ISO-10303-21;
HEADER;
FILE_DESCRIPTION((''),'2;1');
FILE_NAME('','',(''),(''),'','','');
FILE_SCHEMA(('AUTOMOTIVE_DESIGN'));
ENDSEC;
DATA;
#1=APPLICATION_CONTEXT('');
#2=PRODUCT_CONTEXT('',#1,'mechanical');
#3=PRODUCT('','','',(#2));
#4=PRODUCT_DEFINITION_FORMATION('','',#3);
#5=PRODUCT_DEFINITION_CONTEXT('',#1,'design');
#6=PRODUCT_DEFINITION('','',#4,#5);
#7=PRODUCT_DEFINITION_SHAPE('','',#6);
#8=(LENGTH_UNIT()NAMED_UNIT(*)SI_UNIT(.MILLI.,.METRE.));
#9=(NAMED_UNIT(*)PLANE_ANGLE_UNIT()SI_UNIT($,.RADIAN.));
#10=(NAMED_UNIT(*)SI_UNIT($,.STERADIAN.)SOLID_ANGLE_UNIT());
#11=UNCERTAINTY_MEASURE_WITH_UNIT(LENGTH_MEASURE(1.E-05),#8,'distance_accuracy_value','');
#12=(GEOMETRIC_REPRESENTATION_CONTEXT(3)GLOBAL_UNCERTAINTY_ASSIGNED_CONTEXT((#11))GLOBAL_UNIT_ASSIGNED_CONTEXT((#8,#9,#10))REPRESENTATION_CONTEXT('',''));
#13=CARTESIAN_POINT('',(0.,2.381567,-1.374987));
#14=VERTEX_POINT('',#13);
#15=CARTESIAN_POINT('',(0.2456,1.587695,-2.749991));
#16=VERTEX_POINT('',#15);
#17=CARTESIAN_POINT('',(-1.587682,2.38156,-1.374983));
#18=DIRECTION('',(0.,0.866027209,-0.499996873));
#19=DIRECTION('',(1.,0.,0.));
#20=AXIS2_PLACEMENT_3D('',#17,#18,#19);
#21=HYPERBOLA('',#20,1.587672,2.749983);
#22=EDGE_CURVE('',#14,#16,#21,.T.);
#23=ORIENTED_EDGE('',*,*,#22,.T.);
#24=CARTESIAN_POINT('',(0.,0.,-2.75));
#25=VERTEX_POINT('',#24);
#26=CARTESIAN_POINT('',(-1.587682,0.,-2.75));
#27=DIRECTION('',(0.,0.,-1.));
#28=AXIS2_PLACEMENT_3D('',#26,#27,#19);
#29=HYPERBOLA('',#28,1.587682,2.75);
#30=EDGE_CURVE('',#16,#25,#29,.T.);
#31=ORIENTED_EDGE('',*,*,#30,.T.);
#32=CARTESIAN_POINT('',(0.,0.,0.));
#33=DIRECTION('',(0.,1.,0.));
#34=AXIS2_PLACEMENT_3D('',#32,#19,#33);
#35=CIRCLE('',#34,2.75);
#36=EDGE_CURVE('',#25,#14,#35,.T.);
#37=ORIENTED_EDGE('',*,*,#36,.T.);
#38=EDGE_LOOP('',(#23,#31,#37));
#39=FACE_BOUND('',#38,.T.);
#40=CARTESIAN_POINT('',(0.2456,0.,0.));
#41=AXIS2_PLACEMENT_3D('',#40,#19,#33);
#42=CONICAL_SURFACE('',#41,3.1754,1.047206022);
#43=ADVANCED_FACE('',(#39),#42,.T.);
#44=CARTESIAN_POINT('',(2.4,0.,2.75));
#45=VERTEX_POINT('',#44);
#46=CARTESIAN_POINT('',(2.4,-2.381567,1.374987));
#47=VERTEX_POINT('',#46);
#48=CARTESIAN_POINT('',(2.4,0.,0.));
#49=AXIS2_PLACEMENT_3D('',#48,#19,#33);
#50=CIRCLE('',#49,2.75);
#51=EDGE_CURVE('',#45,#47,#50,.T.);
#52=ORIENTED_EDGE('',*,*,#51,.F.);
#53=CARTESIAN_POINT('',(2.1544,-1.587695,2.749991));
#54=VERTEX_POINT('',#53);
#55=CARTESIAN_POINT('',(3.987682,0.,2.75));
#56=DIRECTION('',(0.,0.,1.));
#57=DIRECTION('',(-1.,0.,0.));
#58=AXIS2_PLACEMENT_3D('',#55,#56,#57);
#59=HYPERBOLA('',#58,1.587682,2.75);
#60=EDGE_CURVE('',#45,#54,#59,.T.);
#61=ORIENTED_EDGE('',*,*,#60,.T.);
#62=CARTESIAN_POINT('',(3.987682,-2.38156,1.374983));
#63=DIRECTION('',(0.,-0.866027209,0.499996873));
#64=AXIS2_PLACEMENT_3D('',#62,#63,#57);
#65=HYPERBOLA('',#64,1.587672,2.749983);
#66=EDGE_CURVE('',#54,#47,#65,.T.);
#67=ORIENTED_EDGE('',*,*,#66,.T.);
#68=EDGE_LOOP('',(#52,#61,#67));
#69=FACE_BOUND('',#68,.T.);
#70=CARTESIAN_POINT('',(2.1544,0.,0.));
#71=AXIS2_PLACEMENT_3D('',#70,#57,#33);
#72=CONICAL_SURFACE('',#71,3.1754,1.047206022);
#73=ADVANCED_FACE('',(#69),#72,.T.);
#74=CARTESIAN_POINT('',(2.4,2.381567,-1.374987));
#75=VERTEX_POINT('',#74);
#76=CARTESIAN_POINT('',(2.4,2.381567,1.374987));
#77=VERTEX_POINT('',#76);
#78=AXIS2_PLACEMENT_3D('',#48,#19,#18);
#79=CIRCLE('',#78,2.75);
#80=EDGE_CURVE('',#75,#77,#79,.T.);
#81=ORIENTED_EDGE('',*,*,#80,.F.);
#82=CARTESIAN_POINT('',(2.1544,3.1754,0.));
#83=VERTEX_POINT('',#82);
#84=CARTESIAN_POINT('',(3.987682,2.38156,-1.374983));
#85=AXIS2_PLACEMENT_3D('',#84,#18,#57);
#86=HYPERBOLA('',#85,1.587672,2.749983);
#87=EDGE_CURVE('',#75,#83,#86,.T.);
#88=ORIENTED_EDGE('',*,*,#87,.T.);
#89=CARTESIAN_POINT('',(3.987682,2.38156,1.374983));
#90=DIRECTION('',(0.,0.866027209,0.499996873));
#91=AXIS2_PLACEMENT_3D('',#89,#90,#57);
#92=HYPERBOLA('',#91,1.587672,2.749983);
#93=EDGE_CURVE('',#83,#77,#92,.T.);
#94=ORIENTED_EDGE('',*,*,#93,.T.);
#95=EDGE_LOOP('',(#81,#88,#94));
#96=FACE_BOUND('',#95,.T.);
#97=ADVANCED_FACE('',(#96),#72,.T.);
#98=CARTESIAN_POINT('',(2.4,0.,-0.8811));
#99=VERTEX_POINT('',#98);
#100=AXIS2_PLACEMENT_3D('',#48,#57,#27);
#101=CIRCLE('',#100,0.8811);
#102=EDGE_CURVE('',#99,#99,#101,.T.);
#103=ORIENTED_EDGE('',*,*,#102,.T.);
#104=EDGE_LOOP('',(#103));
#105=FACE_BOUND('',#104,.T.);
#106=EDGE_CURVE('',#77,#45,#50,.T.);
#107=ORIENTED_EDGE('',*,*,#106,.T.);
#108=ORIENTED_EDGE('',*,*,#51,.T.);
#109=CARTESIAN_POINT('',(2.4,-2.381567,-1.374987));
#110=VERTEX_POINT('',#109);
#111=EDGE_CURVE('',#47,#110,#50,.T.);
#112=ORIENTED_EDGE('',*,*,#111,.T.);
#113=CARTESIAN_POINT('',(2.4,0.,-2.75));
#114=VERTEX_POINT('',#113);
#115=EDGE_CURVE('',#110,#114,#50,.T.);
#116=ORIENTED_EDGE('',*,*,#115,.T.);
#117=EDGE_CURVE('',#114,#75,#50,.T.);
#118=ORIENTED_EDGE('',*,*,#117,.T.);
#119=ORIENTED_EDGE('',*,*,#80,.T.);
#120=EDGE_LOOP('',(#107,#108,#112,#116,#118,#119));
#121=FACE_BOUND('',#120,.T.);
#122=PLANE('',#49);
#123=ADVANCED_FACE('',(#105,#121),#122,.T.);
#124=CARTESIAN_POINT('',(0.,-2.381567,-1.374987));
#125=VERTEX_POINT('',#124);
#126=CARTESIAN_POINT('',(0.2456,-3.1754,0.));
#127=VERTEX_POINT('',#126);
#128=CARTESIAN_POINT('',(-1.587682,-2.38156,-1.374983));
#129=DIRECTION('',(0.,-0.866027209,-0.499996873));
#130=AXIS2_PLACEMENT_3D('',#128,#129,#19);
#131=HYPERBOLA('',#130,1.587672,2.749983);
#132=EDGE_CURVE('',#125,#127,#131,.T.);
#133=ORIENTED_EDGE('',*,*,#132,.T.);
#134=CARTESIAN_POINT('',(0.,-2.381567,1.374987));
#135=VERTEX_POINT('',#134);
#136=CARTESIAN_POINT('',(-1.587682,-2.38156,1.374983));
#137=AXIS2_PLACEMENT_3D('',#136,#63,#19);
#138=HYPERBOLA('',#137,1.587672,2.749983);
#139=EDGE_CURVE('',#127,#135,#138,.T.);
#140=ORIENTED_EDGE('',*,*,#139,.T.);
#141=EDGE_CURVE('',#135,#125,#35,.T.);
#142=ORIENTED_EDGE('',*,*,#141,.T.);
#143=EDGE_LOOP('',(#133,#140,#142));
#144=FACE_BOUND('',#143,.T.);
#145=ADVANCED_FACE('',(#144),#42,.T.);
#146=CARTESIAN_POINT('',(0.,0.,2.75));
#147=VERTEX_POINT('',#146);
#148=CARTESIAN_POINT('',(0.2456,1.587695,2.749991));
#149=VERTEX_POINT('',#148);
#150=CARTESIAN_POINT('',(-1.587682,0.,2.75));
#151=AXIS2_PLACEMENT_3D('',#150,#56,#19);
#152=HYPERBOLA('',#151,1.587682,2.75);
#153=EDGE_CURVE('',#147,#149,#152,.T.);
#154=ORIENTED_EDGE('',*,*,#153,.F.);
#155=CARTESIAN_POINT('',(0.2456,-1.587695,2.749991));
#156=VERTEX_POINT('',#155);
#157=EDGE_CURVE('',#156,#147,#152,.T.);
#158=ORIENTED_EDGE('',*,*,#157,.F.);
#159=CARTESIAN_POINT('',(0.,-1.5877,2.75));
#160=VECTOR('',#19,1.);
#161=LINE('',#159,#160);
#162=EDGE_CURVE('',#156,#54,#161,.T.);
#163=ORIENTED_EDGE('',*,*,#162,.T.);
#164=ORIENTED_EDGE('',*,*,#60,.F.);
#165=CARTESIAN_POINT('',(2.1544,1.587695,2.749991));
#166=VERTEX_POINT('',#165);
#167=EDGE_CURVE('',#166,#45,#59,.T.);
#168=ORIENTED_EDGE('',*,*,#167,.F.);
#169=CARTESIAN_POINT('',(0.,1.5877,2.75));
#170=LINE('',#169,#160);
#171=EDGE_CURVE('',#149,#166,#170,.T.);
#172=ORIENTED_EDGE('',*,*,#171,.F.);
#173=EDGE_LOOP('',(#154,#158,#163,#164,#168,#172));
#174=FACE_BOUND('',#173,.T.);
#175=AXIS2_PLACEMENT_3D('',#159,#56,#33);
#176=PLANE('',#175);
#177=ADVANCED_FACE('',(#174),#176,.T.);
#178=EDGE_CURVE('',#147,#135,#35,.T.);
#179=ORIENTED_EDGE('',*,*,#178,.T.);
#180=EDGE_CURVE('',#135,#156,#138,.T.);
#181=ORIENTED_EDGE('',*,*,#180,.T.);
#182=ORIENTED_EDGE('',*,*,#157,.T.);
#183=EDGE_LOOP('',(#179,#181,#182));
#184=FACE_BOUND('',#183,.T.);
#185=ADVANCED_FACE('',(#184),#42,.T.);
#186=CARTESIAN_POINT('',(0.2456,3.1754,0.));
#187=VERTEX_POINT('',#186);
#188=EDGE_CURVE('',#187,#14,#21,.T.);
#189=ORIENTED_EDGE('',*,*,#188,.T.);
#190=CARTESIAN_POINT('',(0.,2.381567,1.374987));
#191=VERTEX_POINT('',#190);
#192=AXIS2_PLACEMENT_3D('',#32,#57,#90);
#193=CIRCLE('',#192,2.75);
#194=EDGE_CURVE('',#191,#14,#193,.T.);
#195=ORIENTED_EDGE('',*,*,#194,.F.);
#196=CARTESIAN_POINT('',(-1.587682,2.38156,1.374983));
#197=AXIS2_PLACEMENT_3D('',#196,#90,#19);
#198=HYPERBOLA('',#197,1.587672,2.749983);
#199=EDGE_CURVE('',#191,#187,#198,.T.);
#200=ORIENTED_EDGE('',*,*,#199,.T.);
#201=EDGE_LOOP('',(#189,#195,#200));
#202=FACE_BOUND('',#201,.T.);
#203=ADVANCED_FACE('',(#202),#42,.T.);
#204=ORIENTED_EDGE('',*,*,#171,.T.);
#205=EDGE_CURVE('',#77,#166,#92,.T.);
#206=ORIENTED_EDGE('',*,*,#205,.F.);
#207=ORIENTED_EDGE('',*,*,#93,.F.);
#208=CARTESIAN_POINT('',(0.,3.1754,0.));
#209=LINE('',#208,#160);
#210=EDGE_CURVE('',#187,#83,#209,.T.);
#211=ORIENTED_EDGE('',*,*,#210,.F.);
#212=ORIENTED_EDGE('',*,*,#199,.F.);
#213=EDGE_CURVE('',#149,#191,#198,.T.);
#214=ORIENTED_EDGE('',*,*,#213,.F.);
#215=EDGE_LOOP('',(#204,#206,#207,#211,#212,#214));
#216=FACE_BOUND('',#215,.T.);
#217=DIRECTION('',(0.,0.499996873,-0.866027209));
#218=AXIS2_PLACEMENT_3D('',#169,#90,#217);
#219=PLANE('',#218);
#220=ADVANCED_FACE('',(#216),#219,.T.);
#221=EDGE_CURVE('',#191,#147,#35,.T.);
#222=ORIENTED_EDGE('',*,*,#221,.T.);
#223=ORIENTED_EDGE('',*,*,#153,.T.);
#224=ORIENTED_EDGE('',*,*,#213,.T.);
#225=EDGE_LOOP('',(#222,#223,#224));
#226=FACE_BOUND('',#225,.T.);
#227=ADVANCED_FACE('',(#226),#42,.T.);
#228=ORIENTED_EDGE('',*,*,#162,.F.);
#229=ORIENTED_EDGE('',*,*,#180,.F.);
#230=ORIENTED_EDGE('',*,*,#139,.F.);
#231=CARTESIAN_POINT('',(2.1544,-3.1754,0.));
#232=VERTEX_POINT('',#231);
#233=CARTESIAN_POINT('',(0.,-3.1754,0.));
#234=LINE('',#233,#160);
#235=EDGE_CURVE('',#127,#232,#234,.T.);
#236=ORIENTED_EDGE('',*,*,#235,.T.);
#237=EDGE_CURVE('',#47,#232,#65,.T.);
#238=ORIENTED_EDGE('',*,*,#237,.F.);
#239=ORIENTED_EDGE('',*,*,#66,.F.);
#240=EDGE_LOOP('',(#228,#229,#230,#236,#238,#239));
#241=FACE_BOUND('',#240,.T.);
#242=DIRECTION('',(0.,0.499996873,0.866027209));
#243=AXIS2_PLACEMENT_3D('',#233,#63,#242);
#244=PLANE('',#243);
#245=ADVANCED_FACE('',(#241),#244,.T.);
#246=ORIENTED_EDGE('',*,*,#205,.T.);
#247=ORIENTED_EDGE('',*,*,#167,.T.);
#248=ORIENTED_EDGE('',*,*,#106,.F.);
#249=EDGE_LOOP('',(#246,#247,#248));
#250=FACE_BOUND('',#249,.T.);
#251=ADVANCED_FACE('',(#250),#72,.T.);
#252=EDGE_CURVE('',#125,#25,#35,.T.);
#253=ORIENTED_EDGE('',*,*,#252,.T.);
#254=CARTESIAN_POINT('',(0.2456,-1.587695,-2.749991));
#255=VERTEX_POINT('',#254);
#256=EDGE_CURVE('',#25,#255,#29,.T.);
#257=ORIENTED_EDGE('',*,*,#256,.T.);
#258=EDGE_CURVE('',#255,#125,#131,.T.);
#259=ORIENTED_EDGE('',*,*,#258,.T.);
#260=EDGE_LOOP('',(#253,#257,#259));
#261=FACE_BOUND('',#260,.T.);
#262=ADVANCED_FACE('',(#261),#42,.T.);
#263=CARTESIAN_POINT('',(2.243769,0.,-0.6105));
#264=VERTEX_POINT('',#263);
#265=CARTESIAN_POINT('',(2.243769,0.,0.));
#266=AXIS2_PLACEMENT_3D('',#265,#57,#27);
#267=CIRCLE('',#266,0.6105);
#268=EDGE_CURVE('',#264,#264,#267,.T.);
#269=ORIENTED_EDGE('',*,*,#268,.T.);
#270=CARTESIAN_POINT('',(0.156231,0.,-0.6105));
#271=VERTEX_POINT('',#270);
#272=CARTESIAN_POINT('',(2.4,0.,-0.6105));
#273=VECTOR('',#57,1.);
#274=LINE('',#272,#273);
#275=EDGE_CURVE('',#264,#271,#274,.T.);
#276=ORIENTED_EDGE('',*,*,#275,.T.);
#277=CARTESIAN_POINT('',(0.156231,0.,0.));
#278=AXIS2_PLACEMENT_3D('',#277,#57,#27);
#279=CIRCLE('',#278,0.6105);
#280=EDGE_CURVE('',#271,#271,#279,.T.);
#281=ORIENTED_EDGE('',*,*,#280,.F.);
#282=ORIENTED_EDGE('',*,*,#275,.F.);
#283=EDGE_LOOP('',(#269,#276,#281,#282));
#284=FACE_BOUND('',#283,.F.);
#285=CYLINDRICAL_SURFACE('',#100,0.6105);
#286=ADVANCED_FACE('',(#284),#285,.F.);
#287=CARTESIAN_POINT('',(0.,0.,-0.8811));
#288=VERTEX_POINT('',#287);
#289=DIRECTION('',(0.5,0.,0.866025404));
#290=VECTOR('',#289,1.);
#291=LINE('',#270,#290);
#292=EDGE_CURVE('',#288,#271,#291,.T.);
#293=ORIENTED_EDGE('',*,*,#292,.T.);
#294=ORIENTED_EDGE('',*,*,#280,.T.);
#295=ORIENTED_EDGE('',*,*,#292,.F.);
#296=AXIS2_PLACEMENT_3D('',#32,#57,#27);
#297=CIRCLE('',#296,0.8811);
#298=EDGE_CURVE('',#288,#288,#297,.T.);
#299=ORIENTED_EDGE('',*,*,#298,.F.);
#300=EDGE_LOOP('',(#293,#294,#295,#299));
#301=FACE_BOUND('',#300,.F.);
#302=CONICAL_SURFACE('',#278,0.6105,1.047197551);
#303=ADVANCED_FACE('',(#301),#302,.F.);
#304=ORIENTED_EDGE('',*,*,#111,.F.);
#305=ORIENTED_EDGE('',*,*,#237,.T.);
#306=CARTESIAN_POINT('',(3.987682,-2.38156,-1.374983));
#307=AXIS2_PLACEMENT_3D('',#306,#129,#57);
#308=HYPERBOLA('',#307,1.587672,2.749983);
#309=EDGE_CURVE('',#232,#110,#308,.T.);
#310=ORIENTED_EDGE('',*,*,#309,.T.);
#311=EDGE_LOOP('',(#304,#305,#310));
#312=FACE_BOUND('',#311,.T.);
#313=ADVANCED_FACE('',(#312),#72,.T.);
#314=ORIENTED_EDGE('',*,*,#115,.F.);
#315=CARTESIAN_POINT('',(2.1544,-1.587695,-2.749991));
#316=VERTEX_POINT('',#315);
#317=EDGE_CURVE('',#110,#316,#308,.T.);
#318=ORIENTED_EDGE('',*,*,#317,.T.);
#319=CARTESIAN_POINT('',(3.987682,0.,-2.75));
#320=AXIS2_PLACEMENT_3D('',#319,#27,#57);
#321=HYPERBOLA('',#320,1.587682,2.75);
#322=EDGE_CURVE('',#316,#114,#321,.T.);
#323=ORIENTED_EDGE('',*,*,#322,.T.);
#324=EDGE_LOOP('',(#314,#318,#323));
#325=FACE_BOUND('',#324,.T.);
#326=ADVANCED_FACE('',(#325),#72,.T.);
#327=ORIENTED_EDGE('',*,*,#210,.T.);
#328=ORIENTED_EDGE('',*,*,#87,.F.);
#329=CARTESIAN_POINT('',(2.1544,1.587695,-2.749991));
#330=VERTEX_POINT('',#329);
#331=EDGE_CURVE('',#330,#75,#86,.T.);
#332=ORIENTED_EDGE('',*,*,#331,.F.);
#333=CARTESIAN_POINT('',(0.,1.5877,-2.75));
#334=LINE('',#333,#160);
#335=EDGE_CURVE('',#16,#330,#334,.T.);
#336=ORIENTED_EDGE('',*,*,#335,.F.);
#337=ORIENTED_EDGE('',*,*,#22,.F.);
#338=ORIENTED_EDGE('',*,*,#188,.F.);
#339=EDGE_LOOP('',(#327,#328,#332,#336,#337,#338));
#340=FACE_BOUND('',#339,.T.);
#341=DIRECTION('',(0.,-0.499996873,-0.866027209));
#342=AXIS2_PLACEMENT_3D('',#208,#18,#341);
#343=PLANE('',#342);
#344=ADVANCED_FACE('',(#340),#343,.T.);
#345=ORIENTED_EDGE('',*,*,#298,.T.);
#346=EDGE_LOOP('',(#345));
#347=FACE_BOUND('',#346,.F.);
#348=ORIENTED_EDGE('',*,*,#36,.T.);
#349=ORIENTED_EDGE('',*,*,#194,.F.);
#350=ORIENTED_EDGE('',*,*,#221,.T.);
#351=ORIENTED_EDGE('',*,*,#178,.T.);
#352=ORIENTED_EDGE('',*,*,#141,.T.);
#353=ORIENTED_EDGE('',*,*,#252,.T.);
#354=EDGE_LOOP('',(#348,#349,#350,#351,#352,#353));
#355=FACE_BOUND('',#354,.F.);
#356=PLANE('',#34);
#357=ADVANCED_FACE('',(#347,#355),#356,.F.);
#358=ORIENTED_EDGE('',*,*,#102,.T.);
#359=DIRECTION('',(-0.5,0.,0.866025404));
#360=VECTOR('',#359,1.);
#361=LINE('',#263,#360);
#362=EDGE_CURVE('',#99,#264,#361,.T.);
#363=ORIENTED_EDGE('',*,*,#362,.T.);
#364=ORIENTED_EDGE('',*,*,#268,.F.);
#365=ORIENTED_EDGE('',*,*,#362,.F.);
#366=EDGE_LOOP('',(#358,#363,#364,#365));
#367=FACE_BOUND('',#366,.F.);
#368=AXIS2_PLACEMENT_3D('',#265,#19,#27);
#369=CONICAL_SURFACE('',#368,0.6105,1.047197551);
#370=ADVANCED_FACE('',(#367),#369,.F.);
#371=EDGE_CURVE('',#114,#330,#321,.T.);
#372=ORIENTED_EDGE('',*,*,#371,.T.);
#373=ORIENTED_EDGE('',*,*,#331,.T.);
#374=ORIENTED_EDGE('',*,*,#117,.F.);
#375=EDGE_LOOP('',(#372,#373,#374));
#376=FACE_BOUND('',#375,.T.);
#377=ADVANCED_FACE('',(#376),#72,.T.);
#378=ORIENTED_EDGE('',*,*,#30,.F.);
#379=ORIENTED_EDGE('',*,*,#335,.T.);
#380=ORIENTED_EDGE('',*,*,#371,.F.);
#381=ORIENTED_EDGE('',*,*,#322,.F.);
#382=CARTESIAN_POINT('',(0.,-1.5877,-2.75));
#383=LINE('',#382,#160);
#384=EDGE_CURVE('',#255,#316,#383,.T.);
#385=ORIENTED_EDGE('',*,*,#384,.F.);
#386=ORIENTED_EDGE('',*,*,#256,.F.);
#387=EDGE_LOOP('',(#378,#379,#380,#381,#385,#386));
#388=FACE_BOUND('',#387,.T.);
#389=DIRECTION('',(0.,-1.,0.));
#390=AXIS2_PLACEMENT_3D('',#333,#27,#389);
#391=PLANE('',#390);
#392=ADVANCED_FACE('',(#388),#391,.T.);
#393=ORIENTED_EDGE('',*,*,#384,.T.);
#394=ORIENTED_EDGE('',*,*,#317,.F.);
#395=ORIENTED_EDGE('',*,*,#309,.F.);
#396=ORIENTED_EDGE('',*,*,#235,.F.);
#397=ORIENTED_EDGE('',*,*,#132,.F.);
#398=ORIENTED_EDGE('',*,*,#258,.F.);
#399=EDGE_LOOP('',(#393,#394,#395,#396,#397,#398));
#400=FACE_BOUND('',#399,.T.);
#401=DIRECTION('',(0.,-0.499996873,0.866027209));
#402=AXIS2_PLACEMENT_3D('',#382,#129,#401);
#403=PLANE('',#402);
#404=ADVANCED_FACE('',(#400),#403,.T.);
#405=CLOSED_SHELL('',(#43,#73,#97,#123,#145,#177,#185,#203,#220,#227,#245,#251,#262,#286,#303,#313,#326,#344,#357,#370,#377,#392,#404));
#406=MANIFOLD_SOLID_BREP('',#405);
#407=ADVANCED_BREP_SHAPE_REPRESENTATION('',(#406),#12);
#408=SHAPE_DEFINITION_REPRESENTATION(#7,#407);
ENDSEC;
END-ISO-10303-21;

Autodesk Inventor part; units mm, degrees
ref_plane "YZ Plane" through (0, 0, 0) normal (1, 0, 0) x (0, 1, 0)
ref_plane "XZ Plane" through (0, 0, 0) normal (0, 1, 0) x (-1, 0, 0)
sketch "Sketch1" plane through (0, 0, 0) normal (1, 0, 0) x (0, 1, 0)
  line L0 (-3.1754, 0) -> (-1.5877, 2.75)
  line L1 (-1.5877, 2.75) -> (1.5877, 2.75)
  line L2 (1.5877, 2.75) -> (3.1754, 0)
  line L3 (3.1754, 0) -> (1.5877, -2.75)
  line L4 (1.5877, -2.75) -> (-1.5877, -2.75)
  line L5 (-1.5877, -2.75) -> (-3.1754, 0)
  point P0 (0, 0)
  point P1 (0, 0)
  dimension "d0" = 6.3509
extrude "Body" add sketch "Sketch1" along normal blind 2.4
sketch "Sketch2" plane through (0, 0, 0) normal (0, 0, 1) x (1, 0, 0)
  line L0 (0, 1.5877) -> (0, 3.1754) projected
  line L1 (0, 3.1754) -> (2.4, 3.1754) projected
  line L2 (2.4, 1.5877) -> (2.4, 3.1754) projected
  line L3 (-0.16, 0) -> (0.96, 0) projected
  line L4 (0.2456, 3.1754) -> (0, 2.75)
  line L5 (2.1544, 3.1754) -> (2.4, 2.75)
  dimension "d3" = 30
  dimension "d4" = 30
  dimension "d5" = 5.5
  dimension "d6" = 5.5
revolve "Chamfer1" cut sketch "Sketch2" angle 360 about axis through (-10, 0, 0) along (1, 0, 0)
sketch "Sketch3" plane through (2.4, 0, 0) normal (1, 0, 0) x (0, 0, -1)
  arc A0 (-1.375, -2.3816) -> (1.375, -2.3816) centre (0, 0) ccw projected
hole "Thread" at (2.4, 0, 0) direction (-1, 0, 0) diameter 1.221 end through all thread size "M1.6x0.35" class "6H" standard "ANSI Metric M Profile"
chamfer "Chamfer2" distance 0.2706 angle 30 1 edges at (2.4, 0, 0.6105) measured on face at (2.4, -2.0253, -0.0245)
chamfer "Chamfer3" distance 0.2706 angle 30 1 edges at (0, 0, 0.6105) measured on face at (0, -2.0253, -0.0245)
ref_plane "Work Plane1" through (-6.3375, 0, 0) normal (0, -0.8660254, -0.5) x (1, 0, 0)
equation "\"d0\" = 1.1547 * SW"
equation "\"d1\" = KOH"
equation "\"d3\" = ANG1"
equation "\"d4\" = ANG2"
equation "\"d5\" = SW0"
equation "\"d6\" = SW01"
equation "\"d8\" = -0.5 * GD1 + 0.5 * NND"
equation "\"d40\" = -0.5 * GD1 + 0.5 * NND"
equation "\"d10\" = -0.5 * GD1 + 0.5 * NND"
equation "\"d41\" = -0.5 * GD1 + 0.5 * NND"
equation "\"ANG1\" = 30deg"
equation "\"ANG2\" = 30deg"
equation "\"NND\" = 3"
equation "\"KOH\" = 2.4"
equation "\"SW\" = 5.5"
equation "\"SW0\" = SW"
equation "\"SW01\" = SW"
equation "\"GUL\" = 0.541266 * PTC"
equation "\"WFT\" = 0.4"
equation "\"THREADDIA\" = 3"
equation "\"TOA\" = 30deg"
equation "\"PTC\" = 0.5"
equation "\"E0\" = 1.155 * SW"
equation "\"GAL\" = 0.541266 * PTC"
equation "\"GD1\" = 2.458734"
properties part number "AS 1112 - M3  Type 5" material "Steel, Mild"
